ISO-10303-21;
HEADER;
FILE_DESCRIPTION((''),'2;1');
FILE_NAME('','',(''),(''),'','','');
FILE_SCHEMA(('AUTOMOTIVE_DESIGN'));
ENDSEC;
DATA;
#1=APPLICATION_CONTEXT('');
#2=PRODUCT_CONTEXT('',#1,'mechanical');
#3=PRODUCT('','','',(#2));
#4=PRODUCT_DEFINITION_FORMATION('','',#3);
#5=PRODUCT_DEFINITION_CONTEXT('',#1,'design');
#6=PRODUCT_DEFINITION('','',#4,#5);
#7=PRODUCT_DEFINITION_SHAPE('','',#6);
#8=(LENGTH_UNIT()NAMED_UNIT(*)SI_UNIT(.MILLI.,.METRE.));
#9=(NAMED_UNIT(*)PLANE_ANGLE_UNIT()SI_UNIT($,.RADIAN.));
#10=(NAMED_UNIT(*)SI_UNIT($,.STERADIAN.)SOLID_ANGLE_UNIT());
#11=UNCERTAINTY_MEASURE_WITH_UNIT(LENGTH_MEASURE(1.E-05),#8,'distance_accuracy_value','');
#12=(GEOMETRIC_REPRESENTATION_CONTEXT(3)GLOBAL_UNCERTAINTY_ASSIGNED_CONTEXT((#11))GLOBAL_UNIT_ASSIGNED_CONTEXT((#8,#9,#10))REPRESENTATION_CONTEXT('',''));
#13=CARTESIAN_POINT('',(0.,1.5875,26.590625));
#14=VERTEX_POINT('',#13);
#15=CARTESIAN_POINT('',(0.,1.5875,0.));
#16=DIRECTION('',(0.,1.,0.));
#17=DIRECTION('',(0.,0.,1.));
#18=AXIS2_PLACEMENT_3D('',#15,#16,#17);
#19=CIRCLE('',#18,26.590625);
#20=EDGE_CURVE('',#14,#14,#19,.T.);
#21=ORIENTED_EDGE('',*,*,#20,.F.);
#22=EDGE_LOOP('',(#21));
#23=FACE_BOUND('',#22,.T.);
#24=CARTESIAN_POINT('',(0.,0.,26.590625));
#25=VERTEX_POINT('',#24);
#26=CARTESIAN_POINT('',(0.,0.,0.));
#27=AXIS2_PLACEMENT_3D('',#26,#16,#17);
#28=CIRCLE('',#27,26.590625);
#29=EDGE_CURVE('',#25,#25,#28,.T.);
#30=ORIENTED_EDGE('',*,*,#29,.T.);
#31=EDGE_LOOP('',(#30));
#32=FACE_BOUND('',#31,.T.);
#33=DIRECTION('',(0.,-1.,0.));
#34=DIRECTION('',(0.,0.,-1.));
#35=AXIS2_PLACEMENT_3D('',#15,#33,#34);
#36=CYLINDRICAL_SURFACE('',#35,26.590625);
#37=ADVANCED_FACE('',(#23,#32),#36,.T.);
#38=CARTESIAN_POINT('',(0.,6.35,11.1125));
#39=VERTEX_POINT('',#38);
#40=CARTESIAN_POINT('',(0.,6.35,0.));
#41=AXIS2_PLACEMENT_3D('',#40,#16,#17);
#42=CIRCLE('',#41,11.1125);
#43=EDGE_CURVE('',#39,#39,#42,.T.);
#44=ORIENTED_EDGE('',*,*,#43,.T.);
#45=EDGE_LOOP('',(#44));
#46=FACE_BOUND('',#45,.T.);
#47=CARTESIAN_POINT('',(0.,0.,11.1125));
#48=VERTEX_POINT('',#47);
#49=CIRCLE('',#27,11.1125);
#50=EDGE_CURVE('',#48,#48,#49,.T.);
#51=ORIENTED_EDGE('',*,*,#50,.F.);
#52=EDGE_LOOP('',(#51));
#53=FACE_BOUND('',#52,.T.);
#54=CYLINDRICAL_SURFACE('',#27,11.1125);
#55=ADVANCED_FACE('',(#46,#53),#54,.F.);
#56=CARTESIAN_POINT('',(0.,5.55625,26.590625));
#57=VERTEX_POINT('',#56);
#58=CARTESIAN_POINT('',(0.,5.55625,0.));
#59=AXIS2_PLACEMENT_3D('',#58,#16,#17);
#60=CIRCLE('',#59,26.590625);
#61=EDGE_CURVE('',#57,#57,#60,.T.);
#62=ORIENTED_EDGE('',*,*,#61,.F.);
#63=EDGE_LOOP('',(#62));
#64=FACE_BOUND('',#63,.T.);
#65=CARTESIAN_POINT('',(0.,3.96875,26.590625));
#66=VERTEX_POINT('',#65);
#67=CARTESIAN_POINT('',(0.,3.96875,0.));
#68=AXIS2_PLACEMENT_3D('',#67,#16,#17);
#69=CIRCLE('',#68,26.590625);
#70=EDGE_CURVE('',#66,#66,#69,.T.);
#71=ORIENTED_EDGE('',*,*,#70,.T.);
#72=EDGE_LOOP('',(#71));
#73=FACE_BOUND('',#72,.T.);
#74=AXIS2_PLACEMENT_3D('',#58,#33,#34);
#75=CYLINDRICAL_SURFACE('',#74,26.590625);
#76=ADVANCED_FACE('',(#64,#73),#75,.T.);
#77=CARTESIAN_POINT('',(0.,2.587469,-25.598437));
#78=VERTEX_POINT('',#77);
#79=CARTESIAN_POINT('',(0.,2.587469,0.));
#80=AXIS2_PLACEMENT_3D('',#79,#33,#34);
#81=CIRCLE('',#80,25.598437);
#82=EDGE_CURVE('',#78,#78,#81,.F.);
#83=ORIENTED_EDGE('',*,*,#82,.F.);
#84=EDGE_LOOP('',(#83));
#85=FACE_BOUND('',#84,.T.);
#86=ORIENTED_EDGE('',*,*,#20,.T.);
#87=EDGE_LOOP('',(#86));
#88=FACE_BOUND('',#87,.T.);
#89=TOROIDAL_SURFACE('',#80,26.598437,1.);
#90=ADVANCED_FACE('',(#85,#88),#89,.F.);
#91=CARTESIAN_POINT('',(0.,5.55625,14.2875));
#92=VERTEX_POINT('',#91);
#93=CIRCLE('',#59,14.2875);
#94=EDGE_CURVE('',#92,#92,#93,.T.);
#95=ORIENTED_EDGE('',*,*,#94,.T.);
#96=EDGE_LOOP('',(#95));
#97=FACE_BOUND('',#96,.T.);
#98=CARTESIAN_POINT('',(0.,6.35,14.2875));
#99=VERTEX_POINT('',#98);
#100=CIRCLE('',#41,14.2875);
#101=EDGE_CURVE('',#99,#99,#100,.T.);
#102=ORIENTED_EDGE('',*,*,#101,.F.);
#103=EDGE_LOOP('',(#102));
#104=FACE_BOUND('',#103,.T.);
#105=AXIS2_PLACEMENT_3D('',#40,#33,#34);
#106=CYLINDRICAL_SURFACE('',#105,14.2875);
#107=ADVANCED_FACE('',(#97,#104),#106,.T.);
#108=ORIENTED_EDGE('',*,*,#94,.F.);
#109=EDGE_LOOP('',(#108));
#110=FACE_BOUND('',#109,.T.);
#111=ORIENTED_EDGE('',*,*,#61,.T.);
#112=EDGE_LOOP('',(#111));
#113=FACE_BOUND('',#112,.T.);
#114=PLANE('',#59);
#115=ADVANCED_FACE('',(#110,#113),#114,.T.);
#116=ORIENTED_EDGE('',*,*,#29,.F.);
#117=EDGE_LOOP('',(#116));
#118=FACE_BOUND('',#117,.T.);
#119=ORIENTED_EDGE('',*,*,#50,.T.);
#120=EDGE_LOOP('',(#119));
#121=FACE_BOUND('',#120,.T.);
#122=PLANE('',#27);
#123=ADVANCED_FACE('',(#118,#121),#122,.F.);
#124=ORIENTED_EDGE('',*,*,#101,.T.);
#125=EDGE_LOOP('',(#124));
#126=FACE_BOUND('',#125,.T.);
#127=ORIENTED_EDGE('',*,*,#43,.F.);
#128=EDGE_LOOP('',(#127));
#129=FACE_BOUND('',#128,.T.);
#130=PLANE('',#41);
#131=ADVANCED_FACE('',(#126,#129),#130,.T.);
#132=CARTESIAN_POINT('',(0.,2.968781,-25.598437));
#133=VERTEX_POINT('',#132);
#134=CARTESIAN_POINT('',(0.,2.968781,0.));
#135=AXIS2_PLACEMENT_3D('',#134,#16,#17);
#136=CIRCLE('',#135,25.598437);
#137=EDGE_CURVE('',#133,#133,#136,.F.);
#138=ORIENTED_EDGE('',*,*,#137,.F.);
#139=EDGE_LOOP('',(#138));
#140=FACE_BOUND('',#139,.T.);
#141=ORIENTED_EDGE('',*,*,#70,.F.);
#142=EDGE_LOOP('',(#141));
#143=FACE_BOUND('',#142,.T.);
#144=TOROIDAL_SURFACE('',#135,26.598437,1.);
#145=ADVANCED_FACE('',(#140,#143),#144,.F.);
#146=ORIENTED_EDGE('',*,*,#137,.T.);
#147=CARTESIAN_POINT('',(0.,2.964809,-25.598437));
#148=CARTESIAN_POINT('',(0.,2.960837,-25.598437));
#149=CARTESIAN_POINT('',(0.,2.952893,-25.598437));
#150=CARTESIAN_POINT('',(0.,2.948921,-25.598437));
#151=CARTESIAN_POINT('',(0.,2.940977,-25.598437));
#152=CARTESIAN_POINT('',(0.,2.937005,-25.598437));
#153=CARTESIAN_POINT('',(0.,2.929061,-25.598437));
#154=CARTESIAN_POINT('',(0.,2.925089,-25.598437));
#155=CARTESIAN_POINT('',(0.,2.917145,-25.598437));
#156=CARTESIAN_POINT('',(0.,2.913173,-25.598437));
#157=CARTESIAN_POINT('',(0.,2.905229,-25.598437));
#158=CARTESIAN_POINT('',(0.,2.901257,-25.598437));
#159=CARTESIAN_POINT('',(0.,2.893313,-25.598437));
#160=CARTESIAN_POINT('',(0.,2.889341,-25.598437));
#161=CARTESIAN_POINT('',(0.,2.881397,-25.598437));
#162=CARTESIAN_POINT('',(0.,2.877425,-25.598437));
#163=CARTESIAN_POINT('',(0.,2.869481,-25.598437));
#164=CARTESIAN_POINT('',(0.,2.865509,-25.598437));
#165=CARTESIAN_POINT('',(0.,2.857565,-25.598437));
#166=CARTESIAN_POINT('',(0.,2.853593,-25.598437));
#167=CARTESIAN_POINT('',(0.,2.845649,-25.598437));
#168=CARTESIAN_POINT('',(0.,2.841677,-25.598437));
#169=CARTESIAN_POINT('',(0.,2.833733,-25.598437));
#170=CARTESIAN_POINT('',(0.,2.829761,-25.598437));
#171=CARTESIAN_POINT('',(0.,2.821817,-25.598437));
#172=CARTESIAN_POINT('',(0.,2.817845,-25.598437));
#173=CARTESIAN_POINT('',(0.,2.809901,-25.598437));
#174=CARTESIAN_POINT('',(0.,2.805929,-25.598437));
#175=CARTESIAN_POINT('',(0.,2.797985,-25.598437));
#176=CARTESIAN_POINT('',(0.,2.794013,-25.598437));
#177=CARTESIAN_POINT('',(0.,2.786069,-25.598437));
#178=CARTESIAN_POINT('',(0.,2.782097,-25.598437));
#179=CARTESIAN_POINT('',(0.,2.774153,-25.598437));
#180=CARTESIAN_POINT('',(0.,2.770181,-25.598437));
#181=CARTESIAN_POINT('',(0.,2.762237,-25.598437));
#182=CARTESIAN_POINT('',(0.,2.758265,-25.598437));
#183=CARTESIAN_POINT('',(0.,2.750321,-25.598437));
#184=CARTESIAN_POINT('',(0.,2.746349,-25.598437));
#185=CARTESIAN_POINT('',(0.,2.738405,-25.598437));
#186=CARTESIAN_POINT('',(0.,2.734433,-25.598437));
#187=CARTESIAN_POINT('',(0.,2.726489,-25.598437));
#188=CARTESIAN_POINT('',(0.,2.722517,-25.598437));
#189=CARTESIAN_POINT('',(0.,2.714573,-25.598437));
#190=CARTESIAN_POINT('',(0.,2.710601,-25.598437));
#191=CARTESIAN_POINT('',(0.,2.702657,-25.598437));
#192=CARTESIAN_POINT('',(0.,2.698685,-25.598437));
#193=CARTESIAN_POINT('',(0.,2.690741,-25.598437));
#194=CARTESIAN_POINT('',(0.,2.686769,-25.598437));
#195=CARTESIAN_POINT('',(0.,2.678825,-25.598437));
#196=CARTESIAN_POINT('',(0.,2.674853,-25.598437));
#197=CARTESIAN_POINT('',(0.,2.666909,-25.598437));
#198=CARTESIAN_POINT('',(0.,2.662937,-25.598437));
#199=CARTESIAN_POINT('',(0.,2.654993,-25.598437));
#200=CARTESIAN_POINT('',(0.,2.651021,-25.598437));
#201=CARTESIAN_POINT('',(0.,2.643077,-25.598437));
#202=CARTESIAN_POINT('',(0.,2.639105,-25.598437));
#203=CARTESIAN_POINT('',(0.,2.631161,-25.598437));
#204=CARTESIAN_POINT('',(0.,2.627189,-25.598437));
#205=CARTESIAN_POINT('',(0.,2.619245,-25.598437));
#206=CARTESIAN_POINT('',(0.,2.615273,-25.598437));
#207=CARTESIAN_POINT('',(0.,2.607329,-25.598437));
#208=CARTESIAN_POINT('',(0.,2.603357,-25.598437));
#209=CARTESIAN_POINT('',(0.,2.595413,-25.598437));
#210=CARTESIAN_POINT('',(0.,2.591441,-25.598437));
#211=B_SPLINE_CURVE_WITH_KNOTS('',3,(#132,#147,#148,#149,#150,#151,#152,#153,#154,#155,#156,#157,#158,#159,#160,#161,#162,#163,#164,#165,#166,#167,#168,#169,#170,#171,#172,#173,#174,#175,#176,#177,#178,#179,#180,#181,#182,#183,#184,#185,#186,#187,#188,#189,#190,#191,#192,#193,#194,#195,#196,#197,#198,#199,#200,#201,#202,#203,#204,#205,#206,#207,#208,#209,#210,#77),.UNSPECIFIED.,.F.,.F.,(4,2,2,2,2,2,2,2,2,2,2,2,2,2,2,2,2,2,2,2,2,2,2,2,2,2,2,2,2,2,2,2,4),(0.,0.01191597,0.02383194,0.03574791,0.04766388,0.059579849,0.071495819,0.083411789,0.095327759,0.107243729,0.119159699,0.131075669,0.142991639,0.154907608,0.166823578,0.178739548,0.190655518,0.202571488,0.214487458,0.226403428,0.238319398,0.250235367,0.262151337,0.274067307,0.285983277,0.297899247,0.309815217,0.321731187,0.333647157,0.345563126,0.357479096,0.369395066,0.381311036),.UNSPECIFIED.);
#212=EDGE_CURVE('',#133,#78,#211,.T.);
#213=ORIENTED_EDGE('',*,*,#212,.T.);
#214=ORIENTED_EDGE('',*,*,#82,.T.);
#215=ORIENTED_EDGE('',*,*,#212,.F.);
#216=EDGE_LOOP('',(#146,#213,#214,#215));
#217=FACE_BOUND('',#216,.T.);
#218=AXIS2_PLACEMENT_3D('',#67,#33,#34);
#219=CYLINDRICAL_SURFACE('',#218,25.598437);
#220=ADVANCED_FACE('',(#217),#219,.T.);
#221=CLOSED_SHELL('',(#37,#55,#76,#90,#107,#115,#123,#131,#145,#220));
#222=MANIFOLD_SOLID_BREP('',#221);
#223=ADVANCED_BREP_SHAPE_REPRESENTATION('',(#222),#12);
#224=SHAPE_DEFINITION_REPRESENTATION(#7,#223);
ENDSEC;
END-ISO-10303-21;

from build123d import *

# Parameters (mm, degrees)
SKETCH1_R           = 26.590625
BOSS_EXTRUDE1_DEPTH = 1.5875
SKETCH2_R           = 25.5984375
BOSS_EXTRUDE2_DEPTH = 2.38125
SKETCH3_R           = 26.590625
BOSS_EXTRUDE3_DEPTH = 1.5875
SKETCH5_R           = 14.2875
BOSS_EXTRUDE4_DEPTH = 0.79375
SKETCH6_R           = 11.1125
CUT_EXTRUDE1_DEPTH  = 39.137188881
FILLET1_R           = 1
FILLET2_R           = 1


with BuildPart() as part:
    # Sketch1 → Boss-Extrude1 (new body)
    with BuildSketch(Plane(origin=(0, 0, 0), x_dir=(1, 0, 0), z_dir=(0, 1, 0))):
        with Locations(Location((0, 0, 0), (0, 0, 270))):
            Circle(SKETCH1_R)
    extrude(amount=BOSS_EXTRUDE1_DEPTH)

    # Sketch2 → Boss-Extrude2 (add)
    with BuildSketch(Plane(origin=(0, 1.5875, 0), x_dir=(1, 0, 0), z_dir=(0, 1, 0))):
        with Locations(Location((0, 0, 0), (0, 0, 90))):
            Circle(SKETCH2_R)
    extrude(amount=BOSS_EXTRUDE2_DEPTH)

    # Sketch3 → Boss-Extrude3 (add)
    with BuildSketch(Plane(origin=(0, 3.96875, 0), x_dir=(1, 0, 0), z_dir=(0, 1, 0))):
        with Locations(Location((0, 0, 0), (0, 0, 270))):
            Circle(SKETCH3_R)
    extrude(amount=BOSS_EXTRUDE3_DEPTH)

    # Sketch5 → Boss-Extrude4 (add)
    with BuildSketch(Plane(origin=(0, 5.55625, 0), x_dir=(1, 0, 0), z_dir=(0, 1, 0))):
        with Locations(Location((0, 0, 0), (0, 0, 270))):
            Circle(SKETCH5_R)
    extrude(amount=BOSS_EXTRUDE4_DEPTH)

    # Sketch6 → Cut-Extrude1 (cut, through all)
    with BuildSketch(Plane(origin=(0, 6.35, 0), x_dir=(1, 0, 0), z_dir=(0, 1, 0))):
        with Locations(Location((0, 0, 0), (0, 0, 270))):
            Circle(SKETCH6_R)
    extrude(amount=-CUT_EXTRUDE1_DEPTH, mode=Mode.SUBTRACT)

    # Fillet1
    # the kernel refuses this fillet: 1 mm, written as the material it adds along each edge
    with BuildSketch(Plane(origin=(0, 1.5875, 0), x_dir=(0, 0, -1), z_dir=(1, 0, 0))) as fillet1_piece_1_section:
        with BuildLine():
            CenterArc((25.5984375 + FILLET1_R, FILLET1_R), FILLET1_R, 180, 90)
            Line((25.5984375 + FILLET1_R, 0), (25.5984375, 0))
            Line((25.5984375, 0), (25.5984375, FILLET1_R))
        make_face()
    fillet1_piece_1 = revolve(axis=Axis((0, 1.5875, 0), (0, 1, 0)), mode=Mode.PRIVATE)
    fillet1_piece_1 = fillet1_piece_1 & Plane(origin=(0, 1.858804506, 0), x_dir=(0, 0, 1), z_dir=(0, -1, 0)) * Cylinder(26.590625, 107, mode=Mode.PRIVATE)
    add(fillet1_piece_1)

    # Fillet2
    # the kernel refuses this fillet: 1 mm, written as the material it adds along each edge
    with BuildSketch(Plane(origin=(0, 3.96875, 0), x_dir=(0, 0, -1), z_dir=(1, 0, 0))) as fillet2_piece_1_section:
        with BuildLine():
            CenterArc((25.5984375 + FILLET2_R, -FILLET2_R), FILLET2_R, 90, 90)
            Line((25.5984375 + FILLET2_R, 0), (25.5984375, 0))
            Line((25.5984375, 0), (25.5984375, -FILLET2_R))
        make_face()
    fillet2_piece_1 = revolve(axis=Axis((0, 3.96875, 0), (0, 1, 0)), mode=Mode.PRIVATE)
    fillet2_piece_1 = fillet2_piece_1 & Plane(origin=(0, 3.697445494, 0), x_dir=(0, 0, 1), z_dir=(0, -1, 0)) * Cylinder(26.590625, 107, mode=Mode.PRIVATE)
    add(fillet2_piece_1)


solid = part.part
